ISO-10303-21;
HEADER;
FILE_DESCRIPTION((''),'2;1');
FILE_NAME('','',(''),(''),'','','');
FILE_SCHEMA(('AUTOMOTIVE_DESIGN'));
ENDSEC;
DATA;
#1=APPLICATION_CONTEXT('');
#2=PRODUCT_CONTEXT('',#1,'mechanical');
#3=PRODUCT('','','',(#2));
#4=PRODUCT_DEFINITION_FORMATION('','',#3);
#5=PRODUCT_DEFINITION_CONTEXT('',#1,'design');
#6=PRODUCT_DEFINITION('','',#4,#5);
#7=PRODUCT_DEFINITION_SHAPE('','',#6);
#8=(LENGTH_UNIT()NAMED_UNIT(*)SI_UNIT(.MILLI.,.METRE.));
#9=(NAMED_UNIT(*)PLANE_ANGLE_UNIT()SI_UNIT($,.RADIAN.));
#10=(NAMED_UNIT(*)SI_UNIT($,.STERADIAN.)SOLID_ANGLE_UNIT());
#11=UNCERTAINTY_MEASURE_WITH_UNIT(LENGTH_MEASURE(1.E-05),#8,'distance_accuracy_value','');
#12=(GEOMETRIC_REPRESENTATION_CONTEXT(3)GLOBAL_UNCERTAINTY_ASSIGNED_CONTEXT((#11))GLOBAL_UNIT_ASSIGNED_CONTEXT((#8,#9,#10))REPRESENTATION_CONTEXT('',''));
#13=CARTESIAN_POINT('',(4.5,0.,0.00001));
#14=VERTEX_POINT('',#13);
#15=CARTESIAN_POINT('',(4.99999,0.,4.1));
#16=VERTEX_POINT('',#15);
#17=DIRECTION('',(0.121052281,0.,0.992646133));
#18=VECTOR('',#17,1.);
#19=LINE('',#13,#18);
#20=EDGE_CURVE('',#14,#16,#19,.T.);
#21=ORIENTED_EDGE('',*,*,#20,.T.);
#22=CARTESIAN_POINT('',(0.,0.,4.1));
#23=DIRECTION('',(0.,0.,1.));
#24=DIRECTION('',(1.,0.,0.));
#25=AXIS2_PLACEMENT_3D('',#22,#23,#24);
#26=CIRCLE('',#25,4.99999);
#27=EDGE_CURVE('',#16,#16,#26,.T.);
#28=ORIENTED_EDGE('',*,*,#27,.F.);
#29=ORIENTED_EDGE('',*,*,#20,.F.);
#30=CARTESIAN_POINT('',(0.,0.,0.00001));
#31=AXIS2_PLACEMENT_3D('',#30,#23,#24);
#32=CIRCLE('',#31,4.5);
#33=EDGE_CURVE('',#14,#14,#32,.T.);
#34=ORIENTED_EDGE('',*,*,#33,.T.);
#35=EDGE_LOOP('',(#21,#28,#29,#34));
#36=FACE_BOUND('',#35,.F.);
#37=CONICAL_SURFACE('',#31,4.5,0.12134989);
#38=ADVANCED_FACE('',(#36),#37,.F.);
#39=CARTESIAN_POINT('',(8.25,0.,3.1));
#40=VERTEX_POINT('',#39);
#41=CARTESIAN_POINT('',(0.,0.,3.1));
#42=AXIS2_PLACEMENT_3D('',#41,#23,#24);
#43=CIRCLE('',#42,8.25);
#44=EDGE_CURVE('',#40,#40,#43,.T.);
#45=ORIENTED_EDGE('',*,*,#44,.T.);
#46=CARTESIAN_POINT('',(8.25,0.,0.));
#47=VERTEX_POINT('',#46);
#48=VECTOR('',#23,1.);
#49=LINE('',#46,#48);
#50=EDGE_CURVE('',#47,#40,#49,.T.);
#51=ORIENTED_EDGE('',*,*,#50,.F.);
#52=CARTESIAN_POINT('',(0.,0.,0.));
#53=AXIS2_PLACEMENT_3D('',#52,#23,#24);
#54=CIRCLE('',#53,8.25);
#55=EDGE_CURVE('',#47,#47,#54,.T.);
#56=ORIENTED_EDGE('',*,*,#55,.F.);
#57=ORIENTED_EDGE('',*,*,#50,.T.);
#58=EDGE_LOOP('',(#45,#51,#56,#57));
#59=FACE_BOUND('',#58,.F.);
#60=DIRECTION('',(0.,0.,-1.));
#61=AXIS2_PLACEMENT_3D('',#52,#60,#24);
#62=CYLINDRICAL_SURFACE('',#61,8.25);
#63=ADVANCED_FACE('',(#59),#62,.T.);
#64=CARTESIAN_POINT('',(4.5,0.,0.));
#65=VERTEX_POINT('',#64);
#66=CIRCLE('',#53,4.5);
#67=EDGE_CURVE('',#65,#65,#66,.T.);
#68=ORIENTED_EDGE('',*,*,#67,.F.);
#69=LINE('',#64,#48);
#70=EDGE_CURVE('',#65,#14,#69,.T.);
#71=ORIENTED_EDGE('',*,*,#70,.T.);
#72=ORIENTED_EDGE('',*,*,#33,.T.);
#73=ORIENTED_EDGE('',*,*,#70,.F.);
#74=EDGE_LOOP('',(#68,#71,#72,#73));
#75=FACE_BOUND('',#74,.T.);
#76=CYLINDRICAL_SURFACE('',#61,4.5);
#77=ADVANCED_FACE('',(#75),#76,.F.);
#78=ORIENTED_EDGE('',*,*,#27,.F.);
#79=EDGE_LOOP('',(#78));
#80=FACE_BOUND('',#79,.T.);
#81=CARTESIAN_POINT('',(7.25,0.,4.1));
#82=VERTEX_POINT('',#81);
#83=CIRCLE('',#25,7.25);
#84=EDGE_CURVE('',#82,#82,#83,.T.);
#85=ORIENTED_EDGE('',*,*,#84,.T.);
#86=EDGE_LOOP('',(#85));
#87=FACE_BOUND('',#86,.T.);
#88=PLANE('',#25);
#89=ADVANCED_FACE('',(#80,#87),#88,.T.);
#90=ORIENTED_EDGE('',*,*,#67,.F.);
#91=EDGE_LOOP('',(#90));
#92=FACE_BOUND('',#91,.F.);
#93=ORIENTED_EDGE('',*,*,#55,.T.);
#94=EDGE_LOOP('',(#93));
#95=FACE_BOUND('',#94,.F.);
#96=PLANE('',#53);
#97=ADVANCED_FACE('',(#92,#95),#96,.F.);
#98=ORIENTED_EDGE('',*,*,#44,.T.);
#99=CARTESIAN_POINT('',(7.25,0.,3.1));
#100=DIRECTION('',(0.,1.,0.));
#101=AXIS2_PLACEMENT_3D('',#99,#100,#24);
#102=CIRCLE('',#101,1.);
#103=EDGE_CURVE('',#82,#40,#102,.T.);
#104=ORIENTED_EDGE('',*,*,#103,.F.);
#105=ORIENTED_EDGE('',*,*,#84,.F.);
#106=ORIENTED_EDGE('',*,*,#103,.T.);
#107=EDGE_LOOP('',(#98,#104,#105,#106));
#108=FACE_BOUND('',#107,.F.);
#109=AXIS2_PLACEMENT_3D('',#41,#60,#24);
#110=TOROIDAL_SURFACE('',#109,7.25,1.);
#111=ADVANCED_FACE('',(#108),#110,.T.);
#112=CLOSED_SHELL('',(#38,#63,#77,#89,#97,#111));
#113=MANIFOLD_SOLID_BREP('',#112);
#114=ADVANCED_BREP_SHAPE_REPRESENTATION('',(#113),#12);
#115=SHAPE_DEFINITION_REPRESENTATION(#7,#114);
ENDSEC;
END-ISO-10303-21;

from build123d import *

# Parameters (mm, degrees)
F0_R     = 8.25
F0_R_2   = 4.5
F1_DEPTH = 4.1
F2_SIZE2 = 0.49999
F2_SIZE  = 4.09999
F3_R     = 1


# Not quite as in the source:
# - a fillet or chamfer is up to 0.001 mm smaller than in the source, because OpenCascade refuses the exact size


with BuildPart() as f1:
    # F0 (on Top) → F1 (new body)
    with BuildSketch(Plane.XY):
        Circle(F0_R)
        Circle(F0_R_2, mode=Mode.SUBTRACT)
    extrude(amount=F1_DEPTH)

    # F2 (size 4.1 and 0.5 in the source; OpenCascade refuses exactly that, so slightly less here)
    f2_edges = [f1.edges().sort_by_distance(p)[0] for p in [
        (-4.5, 0, 4.1),
    ]]
    f2_side = f1.faces().sort_by_distance((-4.5, 0, 2.05))[0]
    chamfer(f2_edges, length=F2_SIZE, length2=F2_SIZE2, reference=f2_side)

    # F3
    f3_edges = [f1.edges().sort_by_distance(p)[0] for p in [
        (-8.25, 0, 4.1),
    ]]
    fillet(f3_edges, radius=F3_R)


solid = f1.part
